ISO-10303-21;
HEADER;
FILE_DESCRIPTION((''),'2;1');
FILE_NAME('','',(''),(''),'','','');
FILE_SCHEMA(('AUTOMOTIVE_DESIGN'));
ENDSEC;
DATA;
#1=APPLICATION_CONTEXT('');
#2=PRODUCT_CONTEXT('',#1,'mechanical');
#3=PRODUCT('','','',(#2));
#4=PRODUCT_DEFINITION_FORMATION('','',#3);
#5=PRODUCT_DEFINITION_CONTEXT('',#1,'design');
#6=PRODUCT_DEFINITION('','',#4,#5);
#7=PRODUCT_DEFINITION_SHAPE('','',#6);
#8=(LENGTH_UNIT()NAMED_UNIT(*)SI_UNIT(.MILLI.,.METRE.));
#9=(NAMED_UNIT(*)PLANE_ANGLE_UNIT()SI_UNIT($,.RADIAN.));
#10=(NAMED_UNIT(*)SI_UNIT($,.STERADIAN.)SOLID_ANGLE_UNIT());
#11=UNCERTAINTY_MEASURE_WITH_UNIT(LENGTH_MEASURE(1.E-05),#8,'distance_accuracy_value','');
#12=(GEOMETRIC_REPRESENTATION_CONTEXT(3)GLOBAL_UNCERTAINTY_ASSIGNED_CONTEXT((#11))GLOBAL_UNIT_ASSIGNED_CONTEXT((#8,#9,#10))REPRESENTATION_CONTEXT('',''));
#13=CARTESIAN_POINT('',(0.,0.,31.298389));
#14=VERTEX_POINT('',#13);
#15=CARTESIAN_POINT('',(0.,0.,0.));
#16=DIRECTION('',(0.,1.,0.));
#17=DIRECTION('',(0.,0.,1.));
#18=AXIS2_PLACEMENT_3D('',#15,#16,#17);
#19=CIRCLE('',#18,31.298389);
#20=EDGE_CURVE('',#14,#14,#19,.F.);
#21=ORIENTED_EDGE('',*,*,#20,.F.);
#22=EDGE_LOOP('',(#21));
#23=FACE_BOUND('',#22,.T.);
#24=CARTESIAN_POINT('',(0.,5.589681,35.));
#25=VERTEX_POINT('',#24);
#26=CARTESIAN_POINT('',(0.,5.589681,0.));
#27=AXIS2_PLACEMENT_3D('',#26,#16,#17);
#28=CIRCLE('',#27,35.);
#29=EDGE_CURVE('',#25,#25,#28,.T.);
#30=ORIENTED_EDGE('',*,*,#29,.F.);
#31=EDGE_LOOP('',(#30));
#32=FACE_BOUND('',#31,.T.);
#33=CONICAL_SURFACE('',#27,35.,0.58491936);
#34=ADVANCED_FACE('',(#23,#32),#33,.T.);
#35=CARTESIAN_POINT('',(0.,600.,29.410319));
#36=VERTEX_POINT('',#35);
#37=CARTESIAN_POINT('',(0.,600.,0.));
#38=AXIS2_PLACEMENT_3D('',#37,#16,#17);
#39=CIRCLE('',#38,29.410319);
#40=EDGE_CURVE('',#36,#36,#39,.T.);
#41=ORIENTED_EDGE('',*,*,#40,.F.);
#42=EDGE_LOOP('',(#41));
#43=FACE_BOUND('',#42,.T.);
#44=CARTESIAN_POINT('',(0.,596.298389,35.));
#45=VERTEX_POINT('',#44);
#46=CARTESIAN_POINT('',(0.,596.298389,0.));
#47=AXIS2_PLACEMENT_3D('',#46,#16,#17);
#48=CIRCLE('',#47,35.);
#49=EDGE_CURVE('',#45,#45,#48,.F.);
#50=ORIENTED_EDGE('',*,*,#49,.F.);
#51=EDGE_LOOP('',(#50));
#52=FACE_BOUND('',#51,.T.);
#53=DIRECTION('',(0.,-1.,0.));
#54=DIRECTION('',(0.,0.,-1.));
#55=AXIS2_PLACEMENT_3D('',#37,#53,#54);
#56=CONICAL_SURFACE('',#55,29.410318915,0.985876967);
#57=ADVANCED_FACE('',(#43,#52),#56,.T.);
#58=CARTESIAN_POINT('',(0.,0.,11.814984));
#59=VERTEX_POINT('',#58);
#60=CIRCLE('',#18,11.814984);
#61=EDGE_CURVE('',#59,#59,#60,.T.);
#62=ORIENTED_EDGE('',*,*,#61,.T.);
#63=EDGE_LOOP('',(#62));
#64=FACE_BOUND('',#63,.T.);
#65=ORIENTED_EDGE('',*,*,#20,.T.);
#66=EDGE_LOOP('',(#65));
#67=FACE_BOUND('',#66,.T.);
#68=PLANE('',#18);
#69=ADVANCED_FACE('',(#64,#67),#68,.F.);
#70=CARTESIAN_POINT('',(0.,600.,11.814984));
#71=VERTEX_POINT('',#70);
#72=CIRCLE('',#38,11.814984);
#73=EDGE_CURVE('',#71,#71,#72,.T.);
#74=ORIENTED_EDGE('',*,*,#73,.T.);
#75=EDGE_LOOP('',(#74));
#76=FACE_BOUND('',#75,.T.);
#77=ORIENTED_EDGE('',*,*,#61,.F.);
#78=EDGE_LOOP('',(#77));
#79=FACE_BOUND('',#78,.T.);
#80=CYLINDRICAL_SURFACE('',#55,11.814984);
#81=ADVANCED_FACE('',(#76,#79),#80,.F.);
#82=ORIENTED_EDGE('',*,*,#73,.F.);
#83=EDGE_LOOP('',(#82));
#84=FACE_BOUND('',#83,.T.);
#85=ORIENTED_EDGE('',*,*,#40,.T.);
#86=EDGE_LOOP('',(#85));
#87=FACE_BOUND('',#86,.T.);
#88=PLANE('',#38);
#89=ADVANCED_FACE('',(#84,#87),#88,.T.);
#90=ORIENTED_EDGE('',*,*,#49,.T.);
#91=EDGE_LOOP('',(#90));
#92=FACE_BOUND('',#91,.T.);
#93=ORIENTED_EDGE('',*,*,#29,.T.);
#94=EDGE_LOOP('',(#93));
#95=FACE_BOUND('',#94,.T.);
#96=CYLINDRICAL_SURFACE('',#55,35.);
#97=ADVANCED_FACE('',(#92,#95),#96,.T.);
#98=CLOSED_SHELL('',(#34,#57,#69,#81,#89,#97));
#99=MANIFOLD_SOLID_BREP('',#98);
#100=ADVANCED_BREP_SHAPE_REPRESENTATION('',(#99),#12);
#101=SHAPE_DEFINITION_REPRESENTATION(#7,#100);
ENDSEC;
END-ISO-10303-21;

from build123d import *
from OCP.BRepFilletAPI import BRepFilletAPI_MakeChamfer

# Parameters (mm, degrees)
SKETCH1_R           = 35
BOSS_EXTRUDE1_DEPTH = 600
SKETCH2_R           = 11.814984261
CUT_EXTRUDE1_DEPTH  = 603.038204768
CHAMFER1_SIZE       = 3.701610982
CHAMFER1_SIZE2      = 5.589681085


with BuildPart() as part:
    # Sketch1 → Boss-Extrude1 (new body)
    with BuildSketch(Plane(origin=(0, 0, 0), x_dir=(1, 0, 0), z_dir=(0, 1, 0))):
        Circle(SKETCH1_R)
    extrude(amount=BOSS_EXTRUDE1_DEPTH)

    # Sketch2 → Cut-Extrude1 (cut, through all)
    with BuildSketch(Plane(origin=(0, 0, 0), x_dir=(1, 0, 0), z_dir=(0, 1, 0))):
        Circle(SKETCH2_R)
    extrude(amount=CUT_EXTRUDE1_DEPTH, mode=Mode.SUBTRACT)

    # Chamfer1: one chamfer whose edges measure the first distance from different faces: ONE call of the kernel's chamfer builder (chamfer() names one face for all edges)
    chamfer1_edges_1 = [part.edges().sort_by_distance(p)[0] for p in [
        (-35, 600, 0),
    ]]
    chamfer1_side_1 = [part.faces().sort_by_distance(p)[0] for p in [
        (-35, 300, 0),
    ]]
    chamfer1_edges_2 = [part.edges().sort_by_distance(p)[0] for p in [
        (-35, 0, 0),
    ]]
    chamfer1_side_2 = [part.faces().sort_by_distance(p)[0] for p in [
        (-34.010050506, 0, 0),
    ]]
    chamfer1 = BRepFilletAPI_MakeChamfer(part.part.solid().wrapped)
    for e in chamfer1_edges_1:
        chamfer1.Add(CHAMFER1_SIZE, CHAMFER1_SIZE2, e.wrapped, chamfer1_side_1[0].wrapped)  # the first distance lies on this face
    for e in chamfer1_edges_2:
        chamfer1.Add(CHAMFER1_SIZE, CHAMFER1_SIZE2, e.wrapped, chamfer1_side_2[0].wrapped)  # the first distance lies on this face
    add(Compound.cast(chamfer1.Shape()), mode=Mode.REPLACE)


solid = part.part
